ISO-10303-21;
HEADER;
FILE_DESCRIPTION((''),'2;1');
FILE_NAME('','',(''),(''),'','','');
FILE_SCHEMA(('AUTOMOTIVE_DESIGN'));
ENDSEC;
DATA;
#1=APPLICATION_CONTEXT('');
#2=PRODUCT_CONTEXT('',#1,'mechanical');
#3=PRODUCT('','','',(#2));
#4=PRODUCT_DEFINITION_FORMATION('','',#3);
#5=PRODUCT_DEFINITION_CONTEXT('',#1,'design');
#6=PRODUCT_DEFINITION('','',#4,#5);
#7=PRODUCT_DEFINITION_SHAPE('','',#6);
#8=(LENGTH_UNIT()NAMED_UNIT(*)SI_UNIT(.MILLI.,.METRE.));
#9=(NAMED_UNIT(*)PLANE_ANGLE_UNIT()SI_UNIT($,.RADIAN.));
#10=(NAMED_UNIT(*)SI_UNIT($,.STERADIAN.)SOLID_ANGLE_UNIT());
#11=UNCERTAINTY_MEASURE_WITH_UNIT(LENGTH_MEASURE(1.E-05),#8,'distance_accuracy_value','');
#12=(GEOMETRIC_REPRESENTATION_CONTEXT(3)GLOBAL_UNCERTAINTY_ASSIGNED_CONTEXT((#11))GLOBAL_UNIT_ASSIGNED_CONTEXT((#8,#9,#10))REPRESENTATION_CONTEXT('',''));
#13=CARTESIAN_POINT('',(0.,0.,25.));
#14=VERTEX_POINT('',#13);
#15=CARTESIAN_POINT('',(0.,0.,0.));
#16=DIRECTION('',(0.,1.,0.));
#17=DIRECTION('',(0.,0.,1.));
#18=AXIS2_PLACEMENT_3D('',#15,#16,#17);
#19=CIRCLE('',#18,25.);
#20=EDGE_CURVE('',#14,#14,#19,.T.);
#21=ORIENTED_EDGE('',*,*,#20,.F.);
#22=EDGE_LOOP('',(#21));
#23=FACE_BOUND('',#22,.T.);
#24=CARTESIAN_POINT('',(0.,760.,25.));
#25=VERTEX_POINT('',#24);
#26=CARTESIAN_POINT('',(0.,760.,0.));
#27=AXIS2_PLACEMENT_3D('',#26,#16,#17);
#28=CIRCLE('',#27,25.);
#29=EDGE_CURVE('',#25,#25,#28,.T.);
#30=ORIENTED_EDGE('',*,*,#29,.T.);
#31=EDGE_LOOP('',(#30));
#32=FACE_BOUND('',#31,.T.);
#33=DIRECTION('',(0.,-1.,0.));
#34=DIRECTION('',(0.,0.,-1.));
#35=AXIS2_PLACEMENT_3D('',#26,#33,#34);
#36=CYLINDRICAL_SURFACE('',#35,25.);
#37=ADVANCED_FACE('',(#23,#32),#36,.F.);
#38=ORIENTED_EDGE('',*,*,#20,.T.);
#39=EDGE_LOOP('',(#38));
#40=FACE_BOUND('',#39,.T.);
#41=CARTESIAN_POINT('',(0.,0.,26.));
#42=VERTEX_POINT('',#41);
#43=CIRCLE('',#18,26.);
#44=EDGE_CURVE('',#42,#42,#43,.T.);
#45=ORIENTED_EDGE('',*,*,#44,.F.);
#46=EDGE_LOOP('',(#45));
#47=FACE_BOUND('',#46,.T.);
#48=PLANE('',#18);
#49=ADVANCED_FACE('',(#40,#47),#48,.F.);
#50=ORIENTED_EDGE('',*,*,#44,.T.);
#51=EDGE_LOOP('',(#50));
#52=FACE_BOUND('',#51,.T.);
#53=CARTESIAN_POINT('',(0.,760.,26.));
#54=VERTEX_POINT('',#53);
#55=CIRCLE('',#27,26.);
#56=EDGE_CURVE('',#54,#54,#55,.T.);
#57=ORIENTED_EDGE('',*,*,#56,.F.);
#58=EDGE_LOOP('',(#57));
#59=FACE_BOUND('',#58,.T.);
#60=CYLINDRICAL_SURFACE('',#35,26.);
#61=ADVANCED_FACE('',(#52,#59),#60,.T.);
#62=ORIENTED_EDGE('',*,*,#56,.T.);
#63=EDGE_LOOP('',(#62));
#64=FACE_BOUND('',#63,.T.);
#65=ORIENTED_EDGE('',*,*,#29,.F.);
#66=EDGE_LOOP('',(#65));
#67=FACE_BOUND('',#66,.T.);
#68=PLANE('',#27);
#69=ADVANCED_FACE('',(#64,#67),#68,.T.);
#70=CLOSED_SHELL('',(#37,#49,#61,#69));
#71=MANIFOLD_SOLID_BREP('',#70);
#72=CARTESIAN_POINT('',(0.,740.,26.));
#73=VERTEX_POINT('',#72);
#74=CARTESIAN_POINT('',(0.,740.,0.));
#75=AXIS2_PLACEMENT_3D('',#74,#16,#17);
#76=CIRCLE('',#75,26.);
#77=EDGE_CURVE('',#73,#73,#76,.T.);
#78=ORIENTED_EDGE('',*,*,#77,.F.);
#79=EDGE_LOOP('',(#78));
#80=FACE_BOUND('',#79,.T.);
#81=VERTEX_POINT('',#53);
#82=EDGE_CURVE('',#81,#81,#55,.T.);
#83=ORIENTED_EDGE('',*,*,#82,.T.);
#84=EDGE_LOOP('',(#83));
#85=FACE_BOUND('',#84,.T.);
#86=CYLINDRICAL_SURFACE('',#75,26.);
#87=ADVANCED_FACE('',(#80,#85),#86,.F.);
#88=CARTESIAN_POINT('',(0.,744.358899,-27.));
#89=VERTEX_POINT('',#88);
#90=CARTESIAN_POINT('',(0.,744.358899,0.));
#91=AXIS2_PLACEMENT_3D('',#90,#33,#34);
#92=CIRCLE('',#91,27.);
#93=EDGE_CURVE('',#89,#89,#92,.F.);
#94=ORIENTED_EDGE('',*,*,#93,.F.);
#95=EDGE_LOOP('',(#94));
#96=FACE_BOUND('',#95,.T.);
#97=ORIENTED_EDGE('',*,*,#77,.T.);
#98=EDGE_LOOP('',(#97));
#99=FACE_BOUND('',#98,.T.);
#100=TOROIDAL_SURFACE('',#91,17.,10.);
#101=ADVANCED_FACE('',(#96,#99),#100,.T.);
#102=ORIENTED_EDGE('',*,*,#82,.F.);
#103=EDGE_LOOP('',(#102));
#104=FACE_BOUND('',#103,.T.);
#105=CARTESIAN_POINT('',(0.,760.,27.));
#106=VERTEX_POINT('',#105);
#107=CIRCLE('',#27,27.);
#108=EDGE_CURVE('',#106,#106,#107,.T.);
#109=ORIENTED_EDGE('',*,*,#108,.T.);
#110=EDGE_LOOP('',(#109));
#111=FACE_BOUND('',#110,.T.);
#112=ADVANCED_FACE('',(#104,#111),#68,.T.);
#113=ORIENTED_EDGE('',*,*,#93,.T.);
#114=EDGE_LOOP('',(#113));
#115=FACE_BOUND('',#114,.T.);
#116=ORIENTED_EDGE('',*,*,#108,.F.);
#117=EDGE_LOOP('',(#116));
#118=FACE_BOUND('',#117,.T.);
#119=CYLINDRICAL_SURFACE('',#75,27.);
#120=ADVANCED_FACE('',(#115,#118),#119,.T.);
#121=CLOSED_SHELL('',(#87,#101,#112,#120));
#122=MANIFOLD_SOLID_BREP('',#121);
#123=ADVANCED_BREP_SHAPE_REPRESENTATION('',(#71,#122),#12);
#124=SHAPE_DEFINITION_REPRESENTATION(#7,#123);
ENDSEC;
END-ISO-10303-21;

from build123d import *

# Parameters (mm, degrees)
ESBO_O1_R                = 26
ESBO_O1_R_2              = 25
RESSALTO_EXTRUS_O1_DEPTH = 760
ESBO_O2_R                = 27
ESBO_O2_R_2              = 26
RESSALTO_EXTRUS_O2_DEPTH = 20
FILETE2_R                = 10


with BuildPart() as part:
    # Esboço1 → Ressalto-extrusão1 (new body)
    with BuildSketch(Plane(origin=(0, 0, 0), x_dir=(1, 0, 0), z_dir=(0, 1, 0))):
        with Locations(Location((0, 0, 0), (0, 0, 270))):
            Circle(ESBO_O1_R)
        with Locations(Location((0, 0, 0), (0, 0, 270))):
            Circle(ESBO_O1_R_2, mode=Mode.SUBTRACT)
    extrude(amount=RESSALTO_EXTRUS_O1_DEPTH)


with BuildPart() as body_2:
    # Esboço2 → Ressalto-extrusão2 (new body)
    with BuildSketch(Plane(origin=(0, 760, 0), x_dir=(1, 0, 0), z_dir=(0, 1, 0))):
        with Locations(Location((0, 0, 0), (0, 0, 270))):
            Circle(ESBO_O2_R)
        with Locations(Location((0, 0, 0), (0, 0, 270))):
            Circle(ESBO_O2_R_2, mode=Mode.SUBTRACT)
    extrude(amount=-RESSALTO_EXTRUS_O2_DEPTH)

    # Filete2
    # the kernel refuses this fillet: 10 mm, written as the material it takes off along each edge
    with BuildSketch(Plane(origin=(0, 740, 0), x_dir=(0, 0, 1), z_dir=(-1, 0, 0))) as filete2_piece_1:
        with BuildLine():
            CenterArc((17, 4.358898944), FILETE2_R, 334.158067237, 25.841932763)
            Line((26, 0), (26.18, -0.087177979))
            ThreePointArc((26.18, -0.087177979), (26.5, -0.2), (27, -0.2))
            Line((27, -0.2), (27.2, 0))
            Line((27.2, 0), (27.2, 4.358898944))
            Line((27.2, 4.358898944), (27, 4.358898944))
        make_face()
    revolve(axis=Axis((0, 740, 0), (0, 1, 0)), mode=Mode.SUBTRACT)


solid = Compound([part.part, body_2.part])
